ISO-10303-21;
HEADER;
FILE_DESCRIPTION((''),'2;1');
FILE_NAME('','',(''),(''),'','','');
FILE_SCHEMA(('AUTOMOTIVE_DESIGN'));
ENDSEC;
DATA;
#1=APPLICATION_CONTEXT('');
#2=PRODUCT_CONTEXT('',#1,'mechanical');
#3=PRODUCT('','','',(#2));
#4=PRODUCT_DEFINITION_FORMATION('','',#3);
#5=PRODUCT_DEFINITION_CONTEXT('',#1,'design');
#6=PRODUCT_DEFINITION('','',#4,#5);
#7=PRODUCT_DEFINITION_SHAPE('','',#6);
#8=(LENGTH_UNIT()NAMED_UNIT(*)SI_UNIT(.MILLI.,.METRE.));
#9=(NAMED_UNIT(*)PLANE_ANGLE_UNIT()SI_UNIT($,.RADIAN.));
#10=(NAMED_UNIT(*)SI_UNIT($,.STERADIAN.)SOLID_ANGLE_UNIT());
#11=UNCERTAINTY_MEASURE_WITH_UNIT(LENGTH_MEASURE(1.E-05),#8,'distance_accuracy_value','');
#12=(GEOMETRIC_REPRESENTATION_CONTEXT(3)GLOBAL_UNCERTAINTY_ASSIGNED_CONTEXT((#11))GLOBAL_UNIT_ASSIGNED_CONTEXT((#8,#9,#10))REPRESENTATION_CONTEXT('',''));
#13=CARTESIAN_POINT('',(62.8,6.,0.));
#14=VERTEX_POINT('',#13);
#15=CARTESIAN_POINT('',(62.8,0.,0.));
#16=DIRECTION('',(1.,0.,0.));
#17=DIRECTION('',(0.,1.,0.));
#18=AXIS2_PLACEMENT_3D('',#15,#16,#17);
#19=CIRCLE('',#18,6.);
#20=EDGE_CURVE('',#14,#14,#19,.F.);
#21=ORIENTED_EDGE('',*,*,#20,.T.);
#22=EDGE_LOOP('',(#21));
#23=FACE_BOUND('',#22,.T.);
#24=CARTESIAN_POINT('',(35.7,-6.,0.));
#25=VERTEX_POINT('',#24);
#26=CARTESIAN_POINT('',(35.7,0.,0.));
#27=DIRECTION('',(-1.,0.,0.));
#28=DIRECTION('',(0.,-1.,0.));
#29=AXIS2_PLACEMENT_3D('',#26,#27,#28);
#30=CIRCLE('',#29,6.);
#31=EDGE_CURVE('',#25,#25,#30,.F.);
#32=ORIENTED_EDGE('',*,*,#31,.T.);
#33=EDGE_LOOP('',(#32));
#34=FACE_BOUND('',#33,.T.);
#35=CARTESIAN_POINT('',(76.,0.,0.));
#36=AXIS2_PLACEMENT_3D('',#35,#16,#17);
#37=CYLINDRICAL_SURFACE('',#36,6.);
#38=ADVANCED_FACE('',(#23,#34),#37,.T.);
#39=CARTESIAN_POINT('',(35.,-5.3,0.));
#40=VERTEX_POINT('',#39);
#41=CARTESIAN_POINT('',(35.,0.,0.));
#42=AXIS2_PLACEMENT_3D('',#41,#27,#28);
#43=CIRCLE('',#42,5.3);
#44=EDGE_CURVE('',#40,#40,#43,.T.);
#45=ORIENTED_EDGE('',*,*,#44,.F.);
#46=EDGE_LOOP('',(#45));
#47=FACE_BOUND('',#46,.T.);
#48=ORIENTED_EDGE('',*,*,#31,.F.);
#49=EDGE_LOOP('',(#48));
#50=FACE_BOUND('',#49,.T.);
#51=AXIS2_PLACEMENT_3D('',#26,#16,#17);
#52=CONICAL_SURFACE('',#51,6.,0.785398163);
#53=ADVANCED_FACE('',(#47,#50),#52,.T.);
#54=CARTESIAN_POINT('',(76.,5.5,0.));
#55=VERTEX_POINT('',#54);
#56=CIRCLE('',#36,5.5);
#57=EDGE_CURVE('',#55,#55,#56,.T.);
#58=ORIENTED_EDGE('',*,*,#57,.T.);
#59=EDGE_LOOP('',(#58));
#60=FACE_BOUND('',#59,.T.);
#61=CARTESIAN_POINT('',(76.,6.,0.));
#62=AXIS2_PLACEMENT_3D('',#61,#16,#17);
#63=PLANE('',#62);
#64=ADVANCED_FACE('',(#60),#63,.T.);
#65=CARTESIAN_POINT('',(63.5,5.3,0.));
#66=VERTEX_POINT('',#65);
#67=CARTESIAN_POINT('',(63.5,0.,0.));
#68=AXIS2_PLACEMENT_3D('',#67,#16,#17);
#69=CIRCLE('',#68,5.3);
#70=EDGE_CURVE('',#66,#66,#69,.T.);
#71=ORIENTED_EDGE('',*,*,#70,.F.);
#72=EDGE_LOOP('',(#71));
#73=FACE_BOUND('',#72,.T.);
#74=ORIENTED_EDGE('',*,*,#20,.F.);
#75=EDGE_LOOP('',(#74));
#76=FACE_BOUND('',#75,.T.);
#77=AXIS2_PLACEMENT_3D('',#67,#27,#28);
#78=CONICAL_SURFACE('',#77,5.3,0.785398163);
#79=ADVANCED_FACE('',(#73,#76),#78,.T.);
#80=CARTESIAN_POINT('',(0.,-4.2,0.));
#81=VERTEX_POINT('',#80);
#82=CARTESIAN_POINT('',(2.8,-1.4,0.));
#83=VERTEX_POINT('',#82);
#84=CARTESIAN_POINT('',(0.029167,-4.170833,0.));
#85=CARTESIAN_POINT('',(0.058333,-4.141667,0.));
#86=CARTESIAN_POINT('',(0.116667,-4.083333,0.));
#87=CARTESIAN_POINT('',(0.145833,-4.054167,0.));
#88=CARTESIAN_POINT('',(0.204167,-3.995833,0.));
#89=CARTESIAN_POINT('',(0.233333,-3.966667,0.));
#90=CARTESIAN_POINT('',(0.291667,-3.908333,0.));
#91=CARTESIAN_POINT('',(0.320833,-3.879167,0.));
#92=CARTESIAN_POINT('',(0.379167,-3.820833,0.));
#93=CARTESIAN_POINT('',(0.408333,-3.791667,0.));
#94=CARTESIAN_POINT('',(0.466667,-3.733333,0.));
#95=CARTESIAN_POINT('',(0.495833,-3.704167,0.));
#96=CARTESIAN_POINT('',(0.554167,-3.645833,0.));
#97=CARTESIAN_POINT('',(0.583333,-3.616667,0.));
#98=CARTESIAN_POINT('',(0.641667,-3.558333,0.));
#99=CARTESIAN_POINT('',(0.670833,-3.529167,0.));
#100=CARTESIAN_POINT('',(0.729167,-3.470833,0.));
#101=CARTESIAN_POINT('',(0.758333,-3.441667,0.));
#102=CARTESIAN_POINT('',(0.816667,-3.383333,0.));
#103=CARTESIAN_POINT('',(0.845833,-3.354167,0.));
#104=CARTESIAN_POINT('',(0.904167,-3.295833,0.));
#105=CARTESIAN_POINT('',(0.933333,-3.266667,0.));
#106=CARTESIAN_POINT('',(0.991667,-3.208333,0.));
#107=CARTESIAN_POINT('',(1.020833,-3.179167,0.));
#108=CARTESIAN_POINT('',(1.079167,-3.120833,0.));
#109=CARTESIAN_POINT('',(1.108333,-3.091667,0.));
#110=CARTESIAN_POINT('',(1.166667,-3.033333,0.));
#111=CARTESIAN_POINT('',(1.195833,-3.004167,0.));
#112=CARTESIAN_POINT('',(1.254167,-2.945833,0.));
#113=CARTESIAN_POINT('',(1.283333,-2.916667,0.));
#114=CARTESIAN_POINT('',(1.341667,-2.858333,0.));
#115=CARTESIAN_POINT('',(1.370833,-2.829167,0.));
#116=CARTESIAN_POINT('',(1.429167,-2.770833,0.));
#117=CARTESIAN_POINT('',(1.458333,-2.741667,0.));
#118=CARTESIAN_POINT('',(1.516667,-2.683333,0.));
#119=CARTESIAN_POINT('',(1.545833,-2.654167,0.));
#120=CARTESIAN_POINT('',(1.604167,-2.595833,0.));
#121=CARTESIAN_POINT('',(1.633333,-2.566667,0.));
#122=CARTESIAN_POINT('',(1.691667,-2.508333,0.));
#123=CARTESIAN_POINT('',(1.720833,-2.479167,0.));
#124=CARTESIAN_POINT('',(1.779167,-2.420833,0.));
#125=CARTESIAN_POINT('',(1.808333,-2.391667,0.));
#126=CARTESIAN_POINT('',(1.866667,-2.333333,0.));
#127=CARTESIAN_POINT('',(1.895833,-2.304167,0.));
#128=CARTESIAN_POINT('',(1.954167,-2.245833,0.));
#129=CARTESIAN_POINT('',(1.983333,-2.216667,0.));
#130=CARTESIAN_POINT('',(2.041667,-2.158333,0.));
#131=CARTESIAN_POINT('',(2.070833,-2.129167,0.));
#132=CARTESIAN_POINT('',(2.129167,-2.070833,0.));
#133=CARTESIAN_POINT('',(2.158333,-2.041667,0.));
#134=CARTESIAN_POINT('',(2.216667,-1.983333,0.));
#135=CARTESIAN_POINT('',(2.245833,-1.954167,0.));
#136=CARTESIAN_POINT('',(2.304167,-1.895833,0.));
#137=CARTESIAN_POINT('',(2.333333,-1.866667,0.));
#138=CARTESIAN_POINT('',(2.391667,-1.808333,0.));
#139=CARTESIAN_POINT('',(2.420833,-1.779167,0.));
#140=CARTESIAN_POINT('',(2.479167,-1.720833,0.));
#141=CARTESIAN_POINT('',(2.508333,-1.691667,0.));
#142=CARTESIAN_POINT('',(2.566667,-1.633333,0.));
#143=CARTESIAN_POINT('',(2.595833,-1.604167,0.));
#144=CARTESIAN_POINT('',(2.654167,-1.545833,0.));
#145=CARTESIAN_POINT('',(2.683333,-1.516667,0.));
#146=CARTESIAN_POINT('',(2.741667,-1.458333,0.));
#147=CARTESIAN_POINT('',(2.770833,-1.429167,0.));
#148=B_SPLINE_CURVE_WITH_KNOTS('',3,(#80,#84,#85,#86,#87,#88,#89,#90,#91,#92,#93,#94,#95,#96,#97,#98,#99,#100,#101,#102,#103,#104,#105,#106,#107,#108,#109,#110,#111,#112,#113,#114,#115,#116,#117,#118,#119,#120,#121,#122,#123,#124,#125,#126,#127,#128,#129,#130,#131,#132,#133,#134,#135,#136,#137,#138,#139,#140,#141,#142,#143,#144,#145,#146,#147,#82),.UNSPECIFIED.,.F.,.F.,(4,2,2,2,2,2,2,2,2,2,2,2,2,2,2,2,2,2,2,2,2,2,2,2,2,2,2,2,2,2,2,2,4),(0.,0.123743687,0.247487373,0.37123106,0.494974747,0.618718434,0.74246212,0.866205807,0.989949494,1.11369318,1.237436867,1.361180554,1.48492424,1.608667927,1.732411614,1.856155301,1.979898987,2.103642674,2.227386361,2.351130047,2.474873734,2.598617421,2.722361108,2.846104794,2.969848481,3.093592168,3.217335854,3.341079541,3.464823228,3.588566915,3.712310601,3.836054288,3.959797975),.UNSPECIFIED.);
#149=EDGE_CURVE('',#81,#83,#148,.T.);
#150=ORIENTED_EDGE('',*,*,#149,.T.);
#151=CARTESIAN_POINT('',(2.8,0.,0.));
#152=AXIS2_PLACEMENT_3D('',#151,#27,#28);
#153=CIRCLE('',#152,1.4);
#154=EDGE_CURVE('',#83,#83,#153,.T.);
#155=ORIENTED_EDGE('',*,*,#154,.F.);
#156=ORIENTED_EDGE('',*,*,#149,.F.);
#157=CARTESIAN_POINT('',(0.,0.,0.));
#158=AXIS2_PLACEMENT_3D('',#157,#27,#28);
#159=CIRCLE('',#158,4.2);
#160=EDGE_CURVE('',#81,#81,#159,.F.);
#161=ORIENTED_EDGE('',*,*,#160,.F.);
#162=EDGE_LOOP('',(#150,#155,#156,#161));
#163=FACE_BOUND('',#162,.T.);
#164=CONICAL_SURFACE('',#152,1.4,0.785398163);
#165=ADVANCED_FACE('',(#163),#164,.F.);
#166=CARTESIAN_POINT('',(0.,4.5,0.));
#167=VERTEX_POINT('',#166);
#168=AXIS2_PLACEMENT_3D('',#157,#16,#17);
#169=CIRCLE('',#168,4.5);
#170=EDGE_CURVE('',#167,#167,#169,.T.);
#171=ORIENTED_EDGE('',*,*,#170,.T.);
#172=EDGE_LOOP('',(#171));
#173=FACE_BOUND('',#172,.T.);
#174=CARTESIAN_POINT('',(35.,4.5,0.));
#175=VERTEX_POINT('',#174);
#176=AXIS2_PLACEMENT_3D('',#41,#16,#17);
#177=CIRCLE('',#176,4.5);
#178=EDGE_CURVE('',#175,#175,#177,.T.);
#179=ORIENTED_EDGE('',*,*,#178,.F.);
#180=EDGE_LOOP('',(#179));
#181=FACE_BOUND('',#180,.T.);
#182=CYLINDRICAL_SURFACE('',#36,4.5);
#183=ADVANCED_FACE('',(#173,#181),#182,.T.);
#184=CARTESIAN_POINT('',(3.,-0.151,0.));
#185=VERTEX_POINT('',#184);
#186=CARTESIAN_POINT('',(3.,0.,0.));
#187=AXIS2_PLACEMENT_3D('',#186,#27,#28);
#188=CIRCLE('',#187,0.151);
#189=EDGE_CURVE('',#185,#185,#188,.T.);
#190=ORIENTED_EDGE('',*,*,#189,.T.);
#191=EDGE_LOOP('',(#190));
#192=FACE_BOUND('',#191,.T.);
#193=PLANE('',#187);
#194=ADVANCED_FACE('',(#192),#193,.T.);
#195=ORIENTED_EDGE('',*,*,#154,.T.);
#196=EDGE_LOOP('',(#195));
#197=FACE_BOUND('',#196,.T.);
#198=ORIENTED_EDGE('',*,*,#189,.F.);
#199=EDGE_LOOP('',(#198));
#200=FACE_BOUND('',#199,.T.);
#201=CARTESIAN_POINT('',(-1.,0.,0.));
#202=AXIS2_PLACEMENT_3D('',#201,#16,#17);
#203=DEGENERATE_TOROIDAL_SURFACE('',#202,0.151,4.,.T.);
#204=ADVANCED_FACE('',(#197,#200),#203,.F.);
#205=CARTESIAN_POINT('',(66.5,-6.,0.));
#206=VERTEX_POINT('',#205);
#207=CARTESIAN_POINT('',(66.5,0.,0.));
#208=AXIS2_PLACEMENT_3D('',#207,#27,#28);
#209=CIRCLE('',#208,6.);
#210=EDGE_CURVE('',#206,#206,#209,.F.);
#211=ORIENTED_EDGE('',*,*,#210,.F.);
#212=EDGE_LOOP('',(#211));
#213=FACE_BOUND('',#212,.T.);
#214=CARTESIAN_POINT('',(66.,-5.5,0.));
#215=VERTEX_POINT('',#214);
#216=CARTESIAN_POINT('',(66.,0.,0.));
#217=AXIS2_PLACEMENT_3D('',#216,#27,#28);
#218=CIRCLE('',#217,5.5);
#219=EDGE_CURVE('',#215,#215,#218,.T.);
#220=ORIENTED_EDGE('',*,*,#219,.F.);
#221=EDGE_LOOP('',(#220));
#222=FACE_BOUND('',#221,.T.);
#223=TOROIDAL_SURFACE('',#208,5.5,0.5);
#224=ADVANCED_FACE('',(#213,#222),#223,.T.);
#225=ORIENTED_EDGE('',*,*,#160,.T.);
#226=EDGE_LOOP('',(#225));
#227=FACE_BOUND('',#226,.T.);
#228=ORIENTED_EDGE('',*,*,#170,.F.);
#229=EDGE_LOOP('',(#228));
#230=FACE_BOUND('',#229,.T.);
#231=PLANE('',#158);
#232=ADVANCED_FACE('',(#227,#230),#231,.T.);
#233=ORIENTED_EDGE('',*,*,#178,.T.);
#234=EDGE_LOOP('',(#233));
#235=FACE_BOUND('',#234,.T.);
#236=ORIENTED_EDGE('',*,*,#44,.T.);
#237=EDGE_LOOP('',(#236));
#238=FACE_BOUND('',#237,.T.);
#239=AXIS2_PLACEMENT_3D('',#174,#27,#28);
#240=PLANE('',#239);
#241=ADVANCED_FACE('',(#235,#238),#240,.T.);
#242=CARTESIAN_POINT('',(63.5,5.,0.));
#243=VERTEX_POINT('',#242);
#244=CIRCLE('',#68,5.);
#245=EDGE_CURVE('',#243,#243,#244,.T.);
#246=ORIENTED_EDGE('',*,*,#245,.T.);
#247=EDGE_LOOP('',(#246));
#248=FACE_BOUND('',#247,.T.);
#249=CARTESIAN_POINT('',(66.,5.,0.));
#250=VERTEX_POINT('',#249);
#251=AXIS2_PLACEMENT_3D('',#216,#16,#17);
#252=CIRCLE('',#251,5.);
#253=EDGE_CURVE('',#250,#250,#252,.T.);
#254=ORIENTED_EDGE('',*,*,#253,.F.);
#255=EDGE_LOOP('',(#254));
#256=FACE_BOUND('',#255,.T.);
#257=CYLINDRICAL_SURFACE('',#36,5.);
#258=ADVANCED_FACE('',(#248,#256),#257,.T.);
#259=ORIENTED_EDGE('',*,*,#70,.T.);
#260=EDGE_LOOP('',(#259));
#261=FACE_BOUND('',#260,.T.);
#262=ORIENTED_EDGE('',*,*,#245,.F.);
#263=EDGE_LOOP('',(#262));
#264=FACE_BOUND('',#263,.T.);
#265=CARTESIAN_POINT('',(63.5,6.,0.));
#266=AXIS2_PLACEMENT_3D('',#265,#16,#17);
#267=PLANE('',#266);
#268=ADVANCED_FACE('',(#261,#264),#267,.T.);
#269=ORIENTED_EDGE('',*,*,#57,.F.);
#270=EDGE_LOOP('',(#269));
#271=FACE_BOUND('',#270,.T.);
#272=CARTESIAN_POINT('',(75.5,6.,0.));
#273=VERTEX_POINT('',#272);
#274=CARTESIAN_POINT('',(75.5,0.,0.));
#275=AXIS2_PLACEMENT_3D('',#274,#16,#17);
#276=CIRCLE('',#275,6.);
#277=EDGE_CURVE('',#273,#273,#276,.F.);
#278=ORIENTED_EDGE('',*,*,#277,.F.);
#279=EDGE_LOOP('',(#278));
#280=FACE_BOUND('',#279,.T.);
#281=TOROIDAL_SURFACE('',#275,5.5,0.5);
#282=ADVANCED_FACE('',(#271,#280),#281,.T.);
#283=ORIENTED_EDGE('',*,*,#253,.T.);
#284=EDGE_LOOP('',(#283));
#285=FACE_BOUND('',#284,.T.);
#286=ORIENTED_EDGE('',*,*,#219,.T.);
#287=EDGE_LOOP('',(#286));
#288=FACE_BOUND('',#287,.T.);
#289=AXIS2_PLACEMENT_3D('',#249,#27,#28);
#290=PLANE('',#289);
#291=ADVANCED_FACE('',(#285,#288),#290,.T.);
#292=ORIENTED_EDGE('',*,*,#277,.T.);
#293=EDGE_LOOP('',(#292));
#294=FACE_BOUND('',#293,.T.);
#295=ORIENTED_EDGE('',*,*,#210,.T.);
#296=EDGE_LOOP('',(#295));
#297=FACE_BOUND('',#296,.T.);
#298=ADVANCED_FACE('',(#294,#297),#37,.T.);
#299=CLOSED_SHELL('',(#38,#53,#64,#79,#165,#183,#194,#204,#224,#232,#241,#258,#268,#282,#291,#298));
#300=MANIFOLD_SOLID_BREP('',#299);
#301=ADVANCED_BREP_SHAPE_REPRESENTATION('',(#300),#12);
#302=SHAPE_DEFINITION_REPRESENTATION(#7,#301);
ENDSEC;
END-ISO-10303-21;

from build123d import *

# Parameters (mm, degrees)
CHANFRO1_SIZE         = 0.7
FILETE1_R             = 0.5
ESBO_O5_R             = 1.4
CORTE_EXTRUS_O1_DEPTH = 3
CHANFRO3_SIZE         = 2.8
FILETE2_R             = 4


with BuildPart() as part:
    # Esboço1 → Revolução1 (revolve)
    with BuildSketch(Plane.XY):
        Polygon((0, 0), (0, 4.5), (35, 4.5), (35, 6), (63.5, 6), (63.5, 5), (66, 5), (66, 6), (76, 6), (76, 0), align=None)
    revolve(axis=Axis((76, 0, 0), (-1, 0, 0)))

    # Chanfro1
    chanfro1_edges = [part.edges().sort_by_distance(p)[0] for p in [
        (63.5, -6, 0),
        (35, -6, 0),
    ]]
    chamfer(chanfro1_edges, length=CHANFRO1_SIZE)

    # Filete1
    filete1_edges = [part.edges().sort_by_distance(p)[0] for p in [
        (76, -6, 0),
        (66, -6, 0),
    ]]
    fillet(filete1_edges, radius=FILETE1_R)

    # Esboço5 → Corte-extrusão1 (cut)
    with BuildSketch(Plane.ZY):
        with Locations(Location((0, 0, 0), (0, 0, 270))):
            Circle(ESBO_O5_R)
    extrude(amount=-CORTE_EXTRUS_O1_DEPTH, mode=Mode.SUBTRACT)

    # Chanfro3
    chanfro3_edges = [part.edges().sort_by_distance(p)[0] for p in [
        (0, 1.4, 0),
    ]]
    chamfer(chanfro3_edges, length=CHANFRO3_SIZE)

    # Filete2
    # the kernel refuses this fillet: 4 mm, written as the material it adds along each edge
    with BuildSketch(Plane(origin=(3, 0, 0), x_dir=(0, -1, 0), z_dir=(0, 0, -1))) as filete2_piece_1:
        with BuildLine():
            CenterArc((0.1510004, 4), FILETE2_R, 270, 18.194872339)
            Line((0.1510004, 0), (0.1510004, -0.08))
            Line((0.1510004, -0.08), (1.4, -0.08))
            Line((1.4, -0.08), (1.48, 0))
            ThreePointArc((1.48, 0), (1.48, 0.1), (1.424979992, 0.124))
            Line((1.424979992, 0.124), (1.4, 0.2))
        make_face()
    revolve(axis=Axis((3, 0, 0), (-1, 0, 0)))


solid = part.part
